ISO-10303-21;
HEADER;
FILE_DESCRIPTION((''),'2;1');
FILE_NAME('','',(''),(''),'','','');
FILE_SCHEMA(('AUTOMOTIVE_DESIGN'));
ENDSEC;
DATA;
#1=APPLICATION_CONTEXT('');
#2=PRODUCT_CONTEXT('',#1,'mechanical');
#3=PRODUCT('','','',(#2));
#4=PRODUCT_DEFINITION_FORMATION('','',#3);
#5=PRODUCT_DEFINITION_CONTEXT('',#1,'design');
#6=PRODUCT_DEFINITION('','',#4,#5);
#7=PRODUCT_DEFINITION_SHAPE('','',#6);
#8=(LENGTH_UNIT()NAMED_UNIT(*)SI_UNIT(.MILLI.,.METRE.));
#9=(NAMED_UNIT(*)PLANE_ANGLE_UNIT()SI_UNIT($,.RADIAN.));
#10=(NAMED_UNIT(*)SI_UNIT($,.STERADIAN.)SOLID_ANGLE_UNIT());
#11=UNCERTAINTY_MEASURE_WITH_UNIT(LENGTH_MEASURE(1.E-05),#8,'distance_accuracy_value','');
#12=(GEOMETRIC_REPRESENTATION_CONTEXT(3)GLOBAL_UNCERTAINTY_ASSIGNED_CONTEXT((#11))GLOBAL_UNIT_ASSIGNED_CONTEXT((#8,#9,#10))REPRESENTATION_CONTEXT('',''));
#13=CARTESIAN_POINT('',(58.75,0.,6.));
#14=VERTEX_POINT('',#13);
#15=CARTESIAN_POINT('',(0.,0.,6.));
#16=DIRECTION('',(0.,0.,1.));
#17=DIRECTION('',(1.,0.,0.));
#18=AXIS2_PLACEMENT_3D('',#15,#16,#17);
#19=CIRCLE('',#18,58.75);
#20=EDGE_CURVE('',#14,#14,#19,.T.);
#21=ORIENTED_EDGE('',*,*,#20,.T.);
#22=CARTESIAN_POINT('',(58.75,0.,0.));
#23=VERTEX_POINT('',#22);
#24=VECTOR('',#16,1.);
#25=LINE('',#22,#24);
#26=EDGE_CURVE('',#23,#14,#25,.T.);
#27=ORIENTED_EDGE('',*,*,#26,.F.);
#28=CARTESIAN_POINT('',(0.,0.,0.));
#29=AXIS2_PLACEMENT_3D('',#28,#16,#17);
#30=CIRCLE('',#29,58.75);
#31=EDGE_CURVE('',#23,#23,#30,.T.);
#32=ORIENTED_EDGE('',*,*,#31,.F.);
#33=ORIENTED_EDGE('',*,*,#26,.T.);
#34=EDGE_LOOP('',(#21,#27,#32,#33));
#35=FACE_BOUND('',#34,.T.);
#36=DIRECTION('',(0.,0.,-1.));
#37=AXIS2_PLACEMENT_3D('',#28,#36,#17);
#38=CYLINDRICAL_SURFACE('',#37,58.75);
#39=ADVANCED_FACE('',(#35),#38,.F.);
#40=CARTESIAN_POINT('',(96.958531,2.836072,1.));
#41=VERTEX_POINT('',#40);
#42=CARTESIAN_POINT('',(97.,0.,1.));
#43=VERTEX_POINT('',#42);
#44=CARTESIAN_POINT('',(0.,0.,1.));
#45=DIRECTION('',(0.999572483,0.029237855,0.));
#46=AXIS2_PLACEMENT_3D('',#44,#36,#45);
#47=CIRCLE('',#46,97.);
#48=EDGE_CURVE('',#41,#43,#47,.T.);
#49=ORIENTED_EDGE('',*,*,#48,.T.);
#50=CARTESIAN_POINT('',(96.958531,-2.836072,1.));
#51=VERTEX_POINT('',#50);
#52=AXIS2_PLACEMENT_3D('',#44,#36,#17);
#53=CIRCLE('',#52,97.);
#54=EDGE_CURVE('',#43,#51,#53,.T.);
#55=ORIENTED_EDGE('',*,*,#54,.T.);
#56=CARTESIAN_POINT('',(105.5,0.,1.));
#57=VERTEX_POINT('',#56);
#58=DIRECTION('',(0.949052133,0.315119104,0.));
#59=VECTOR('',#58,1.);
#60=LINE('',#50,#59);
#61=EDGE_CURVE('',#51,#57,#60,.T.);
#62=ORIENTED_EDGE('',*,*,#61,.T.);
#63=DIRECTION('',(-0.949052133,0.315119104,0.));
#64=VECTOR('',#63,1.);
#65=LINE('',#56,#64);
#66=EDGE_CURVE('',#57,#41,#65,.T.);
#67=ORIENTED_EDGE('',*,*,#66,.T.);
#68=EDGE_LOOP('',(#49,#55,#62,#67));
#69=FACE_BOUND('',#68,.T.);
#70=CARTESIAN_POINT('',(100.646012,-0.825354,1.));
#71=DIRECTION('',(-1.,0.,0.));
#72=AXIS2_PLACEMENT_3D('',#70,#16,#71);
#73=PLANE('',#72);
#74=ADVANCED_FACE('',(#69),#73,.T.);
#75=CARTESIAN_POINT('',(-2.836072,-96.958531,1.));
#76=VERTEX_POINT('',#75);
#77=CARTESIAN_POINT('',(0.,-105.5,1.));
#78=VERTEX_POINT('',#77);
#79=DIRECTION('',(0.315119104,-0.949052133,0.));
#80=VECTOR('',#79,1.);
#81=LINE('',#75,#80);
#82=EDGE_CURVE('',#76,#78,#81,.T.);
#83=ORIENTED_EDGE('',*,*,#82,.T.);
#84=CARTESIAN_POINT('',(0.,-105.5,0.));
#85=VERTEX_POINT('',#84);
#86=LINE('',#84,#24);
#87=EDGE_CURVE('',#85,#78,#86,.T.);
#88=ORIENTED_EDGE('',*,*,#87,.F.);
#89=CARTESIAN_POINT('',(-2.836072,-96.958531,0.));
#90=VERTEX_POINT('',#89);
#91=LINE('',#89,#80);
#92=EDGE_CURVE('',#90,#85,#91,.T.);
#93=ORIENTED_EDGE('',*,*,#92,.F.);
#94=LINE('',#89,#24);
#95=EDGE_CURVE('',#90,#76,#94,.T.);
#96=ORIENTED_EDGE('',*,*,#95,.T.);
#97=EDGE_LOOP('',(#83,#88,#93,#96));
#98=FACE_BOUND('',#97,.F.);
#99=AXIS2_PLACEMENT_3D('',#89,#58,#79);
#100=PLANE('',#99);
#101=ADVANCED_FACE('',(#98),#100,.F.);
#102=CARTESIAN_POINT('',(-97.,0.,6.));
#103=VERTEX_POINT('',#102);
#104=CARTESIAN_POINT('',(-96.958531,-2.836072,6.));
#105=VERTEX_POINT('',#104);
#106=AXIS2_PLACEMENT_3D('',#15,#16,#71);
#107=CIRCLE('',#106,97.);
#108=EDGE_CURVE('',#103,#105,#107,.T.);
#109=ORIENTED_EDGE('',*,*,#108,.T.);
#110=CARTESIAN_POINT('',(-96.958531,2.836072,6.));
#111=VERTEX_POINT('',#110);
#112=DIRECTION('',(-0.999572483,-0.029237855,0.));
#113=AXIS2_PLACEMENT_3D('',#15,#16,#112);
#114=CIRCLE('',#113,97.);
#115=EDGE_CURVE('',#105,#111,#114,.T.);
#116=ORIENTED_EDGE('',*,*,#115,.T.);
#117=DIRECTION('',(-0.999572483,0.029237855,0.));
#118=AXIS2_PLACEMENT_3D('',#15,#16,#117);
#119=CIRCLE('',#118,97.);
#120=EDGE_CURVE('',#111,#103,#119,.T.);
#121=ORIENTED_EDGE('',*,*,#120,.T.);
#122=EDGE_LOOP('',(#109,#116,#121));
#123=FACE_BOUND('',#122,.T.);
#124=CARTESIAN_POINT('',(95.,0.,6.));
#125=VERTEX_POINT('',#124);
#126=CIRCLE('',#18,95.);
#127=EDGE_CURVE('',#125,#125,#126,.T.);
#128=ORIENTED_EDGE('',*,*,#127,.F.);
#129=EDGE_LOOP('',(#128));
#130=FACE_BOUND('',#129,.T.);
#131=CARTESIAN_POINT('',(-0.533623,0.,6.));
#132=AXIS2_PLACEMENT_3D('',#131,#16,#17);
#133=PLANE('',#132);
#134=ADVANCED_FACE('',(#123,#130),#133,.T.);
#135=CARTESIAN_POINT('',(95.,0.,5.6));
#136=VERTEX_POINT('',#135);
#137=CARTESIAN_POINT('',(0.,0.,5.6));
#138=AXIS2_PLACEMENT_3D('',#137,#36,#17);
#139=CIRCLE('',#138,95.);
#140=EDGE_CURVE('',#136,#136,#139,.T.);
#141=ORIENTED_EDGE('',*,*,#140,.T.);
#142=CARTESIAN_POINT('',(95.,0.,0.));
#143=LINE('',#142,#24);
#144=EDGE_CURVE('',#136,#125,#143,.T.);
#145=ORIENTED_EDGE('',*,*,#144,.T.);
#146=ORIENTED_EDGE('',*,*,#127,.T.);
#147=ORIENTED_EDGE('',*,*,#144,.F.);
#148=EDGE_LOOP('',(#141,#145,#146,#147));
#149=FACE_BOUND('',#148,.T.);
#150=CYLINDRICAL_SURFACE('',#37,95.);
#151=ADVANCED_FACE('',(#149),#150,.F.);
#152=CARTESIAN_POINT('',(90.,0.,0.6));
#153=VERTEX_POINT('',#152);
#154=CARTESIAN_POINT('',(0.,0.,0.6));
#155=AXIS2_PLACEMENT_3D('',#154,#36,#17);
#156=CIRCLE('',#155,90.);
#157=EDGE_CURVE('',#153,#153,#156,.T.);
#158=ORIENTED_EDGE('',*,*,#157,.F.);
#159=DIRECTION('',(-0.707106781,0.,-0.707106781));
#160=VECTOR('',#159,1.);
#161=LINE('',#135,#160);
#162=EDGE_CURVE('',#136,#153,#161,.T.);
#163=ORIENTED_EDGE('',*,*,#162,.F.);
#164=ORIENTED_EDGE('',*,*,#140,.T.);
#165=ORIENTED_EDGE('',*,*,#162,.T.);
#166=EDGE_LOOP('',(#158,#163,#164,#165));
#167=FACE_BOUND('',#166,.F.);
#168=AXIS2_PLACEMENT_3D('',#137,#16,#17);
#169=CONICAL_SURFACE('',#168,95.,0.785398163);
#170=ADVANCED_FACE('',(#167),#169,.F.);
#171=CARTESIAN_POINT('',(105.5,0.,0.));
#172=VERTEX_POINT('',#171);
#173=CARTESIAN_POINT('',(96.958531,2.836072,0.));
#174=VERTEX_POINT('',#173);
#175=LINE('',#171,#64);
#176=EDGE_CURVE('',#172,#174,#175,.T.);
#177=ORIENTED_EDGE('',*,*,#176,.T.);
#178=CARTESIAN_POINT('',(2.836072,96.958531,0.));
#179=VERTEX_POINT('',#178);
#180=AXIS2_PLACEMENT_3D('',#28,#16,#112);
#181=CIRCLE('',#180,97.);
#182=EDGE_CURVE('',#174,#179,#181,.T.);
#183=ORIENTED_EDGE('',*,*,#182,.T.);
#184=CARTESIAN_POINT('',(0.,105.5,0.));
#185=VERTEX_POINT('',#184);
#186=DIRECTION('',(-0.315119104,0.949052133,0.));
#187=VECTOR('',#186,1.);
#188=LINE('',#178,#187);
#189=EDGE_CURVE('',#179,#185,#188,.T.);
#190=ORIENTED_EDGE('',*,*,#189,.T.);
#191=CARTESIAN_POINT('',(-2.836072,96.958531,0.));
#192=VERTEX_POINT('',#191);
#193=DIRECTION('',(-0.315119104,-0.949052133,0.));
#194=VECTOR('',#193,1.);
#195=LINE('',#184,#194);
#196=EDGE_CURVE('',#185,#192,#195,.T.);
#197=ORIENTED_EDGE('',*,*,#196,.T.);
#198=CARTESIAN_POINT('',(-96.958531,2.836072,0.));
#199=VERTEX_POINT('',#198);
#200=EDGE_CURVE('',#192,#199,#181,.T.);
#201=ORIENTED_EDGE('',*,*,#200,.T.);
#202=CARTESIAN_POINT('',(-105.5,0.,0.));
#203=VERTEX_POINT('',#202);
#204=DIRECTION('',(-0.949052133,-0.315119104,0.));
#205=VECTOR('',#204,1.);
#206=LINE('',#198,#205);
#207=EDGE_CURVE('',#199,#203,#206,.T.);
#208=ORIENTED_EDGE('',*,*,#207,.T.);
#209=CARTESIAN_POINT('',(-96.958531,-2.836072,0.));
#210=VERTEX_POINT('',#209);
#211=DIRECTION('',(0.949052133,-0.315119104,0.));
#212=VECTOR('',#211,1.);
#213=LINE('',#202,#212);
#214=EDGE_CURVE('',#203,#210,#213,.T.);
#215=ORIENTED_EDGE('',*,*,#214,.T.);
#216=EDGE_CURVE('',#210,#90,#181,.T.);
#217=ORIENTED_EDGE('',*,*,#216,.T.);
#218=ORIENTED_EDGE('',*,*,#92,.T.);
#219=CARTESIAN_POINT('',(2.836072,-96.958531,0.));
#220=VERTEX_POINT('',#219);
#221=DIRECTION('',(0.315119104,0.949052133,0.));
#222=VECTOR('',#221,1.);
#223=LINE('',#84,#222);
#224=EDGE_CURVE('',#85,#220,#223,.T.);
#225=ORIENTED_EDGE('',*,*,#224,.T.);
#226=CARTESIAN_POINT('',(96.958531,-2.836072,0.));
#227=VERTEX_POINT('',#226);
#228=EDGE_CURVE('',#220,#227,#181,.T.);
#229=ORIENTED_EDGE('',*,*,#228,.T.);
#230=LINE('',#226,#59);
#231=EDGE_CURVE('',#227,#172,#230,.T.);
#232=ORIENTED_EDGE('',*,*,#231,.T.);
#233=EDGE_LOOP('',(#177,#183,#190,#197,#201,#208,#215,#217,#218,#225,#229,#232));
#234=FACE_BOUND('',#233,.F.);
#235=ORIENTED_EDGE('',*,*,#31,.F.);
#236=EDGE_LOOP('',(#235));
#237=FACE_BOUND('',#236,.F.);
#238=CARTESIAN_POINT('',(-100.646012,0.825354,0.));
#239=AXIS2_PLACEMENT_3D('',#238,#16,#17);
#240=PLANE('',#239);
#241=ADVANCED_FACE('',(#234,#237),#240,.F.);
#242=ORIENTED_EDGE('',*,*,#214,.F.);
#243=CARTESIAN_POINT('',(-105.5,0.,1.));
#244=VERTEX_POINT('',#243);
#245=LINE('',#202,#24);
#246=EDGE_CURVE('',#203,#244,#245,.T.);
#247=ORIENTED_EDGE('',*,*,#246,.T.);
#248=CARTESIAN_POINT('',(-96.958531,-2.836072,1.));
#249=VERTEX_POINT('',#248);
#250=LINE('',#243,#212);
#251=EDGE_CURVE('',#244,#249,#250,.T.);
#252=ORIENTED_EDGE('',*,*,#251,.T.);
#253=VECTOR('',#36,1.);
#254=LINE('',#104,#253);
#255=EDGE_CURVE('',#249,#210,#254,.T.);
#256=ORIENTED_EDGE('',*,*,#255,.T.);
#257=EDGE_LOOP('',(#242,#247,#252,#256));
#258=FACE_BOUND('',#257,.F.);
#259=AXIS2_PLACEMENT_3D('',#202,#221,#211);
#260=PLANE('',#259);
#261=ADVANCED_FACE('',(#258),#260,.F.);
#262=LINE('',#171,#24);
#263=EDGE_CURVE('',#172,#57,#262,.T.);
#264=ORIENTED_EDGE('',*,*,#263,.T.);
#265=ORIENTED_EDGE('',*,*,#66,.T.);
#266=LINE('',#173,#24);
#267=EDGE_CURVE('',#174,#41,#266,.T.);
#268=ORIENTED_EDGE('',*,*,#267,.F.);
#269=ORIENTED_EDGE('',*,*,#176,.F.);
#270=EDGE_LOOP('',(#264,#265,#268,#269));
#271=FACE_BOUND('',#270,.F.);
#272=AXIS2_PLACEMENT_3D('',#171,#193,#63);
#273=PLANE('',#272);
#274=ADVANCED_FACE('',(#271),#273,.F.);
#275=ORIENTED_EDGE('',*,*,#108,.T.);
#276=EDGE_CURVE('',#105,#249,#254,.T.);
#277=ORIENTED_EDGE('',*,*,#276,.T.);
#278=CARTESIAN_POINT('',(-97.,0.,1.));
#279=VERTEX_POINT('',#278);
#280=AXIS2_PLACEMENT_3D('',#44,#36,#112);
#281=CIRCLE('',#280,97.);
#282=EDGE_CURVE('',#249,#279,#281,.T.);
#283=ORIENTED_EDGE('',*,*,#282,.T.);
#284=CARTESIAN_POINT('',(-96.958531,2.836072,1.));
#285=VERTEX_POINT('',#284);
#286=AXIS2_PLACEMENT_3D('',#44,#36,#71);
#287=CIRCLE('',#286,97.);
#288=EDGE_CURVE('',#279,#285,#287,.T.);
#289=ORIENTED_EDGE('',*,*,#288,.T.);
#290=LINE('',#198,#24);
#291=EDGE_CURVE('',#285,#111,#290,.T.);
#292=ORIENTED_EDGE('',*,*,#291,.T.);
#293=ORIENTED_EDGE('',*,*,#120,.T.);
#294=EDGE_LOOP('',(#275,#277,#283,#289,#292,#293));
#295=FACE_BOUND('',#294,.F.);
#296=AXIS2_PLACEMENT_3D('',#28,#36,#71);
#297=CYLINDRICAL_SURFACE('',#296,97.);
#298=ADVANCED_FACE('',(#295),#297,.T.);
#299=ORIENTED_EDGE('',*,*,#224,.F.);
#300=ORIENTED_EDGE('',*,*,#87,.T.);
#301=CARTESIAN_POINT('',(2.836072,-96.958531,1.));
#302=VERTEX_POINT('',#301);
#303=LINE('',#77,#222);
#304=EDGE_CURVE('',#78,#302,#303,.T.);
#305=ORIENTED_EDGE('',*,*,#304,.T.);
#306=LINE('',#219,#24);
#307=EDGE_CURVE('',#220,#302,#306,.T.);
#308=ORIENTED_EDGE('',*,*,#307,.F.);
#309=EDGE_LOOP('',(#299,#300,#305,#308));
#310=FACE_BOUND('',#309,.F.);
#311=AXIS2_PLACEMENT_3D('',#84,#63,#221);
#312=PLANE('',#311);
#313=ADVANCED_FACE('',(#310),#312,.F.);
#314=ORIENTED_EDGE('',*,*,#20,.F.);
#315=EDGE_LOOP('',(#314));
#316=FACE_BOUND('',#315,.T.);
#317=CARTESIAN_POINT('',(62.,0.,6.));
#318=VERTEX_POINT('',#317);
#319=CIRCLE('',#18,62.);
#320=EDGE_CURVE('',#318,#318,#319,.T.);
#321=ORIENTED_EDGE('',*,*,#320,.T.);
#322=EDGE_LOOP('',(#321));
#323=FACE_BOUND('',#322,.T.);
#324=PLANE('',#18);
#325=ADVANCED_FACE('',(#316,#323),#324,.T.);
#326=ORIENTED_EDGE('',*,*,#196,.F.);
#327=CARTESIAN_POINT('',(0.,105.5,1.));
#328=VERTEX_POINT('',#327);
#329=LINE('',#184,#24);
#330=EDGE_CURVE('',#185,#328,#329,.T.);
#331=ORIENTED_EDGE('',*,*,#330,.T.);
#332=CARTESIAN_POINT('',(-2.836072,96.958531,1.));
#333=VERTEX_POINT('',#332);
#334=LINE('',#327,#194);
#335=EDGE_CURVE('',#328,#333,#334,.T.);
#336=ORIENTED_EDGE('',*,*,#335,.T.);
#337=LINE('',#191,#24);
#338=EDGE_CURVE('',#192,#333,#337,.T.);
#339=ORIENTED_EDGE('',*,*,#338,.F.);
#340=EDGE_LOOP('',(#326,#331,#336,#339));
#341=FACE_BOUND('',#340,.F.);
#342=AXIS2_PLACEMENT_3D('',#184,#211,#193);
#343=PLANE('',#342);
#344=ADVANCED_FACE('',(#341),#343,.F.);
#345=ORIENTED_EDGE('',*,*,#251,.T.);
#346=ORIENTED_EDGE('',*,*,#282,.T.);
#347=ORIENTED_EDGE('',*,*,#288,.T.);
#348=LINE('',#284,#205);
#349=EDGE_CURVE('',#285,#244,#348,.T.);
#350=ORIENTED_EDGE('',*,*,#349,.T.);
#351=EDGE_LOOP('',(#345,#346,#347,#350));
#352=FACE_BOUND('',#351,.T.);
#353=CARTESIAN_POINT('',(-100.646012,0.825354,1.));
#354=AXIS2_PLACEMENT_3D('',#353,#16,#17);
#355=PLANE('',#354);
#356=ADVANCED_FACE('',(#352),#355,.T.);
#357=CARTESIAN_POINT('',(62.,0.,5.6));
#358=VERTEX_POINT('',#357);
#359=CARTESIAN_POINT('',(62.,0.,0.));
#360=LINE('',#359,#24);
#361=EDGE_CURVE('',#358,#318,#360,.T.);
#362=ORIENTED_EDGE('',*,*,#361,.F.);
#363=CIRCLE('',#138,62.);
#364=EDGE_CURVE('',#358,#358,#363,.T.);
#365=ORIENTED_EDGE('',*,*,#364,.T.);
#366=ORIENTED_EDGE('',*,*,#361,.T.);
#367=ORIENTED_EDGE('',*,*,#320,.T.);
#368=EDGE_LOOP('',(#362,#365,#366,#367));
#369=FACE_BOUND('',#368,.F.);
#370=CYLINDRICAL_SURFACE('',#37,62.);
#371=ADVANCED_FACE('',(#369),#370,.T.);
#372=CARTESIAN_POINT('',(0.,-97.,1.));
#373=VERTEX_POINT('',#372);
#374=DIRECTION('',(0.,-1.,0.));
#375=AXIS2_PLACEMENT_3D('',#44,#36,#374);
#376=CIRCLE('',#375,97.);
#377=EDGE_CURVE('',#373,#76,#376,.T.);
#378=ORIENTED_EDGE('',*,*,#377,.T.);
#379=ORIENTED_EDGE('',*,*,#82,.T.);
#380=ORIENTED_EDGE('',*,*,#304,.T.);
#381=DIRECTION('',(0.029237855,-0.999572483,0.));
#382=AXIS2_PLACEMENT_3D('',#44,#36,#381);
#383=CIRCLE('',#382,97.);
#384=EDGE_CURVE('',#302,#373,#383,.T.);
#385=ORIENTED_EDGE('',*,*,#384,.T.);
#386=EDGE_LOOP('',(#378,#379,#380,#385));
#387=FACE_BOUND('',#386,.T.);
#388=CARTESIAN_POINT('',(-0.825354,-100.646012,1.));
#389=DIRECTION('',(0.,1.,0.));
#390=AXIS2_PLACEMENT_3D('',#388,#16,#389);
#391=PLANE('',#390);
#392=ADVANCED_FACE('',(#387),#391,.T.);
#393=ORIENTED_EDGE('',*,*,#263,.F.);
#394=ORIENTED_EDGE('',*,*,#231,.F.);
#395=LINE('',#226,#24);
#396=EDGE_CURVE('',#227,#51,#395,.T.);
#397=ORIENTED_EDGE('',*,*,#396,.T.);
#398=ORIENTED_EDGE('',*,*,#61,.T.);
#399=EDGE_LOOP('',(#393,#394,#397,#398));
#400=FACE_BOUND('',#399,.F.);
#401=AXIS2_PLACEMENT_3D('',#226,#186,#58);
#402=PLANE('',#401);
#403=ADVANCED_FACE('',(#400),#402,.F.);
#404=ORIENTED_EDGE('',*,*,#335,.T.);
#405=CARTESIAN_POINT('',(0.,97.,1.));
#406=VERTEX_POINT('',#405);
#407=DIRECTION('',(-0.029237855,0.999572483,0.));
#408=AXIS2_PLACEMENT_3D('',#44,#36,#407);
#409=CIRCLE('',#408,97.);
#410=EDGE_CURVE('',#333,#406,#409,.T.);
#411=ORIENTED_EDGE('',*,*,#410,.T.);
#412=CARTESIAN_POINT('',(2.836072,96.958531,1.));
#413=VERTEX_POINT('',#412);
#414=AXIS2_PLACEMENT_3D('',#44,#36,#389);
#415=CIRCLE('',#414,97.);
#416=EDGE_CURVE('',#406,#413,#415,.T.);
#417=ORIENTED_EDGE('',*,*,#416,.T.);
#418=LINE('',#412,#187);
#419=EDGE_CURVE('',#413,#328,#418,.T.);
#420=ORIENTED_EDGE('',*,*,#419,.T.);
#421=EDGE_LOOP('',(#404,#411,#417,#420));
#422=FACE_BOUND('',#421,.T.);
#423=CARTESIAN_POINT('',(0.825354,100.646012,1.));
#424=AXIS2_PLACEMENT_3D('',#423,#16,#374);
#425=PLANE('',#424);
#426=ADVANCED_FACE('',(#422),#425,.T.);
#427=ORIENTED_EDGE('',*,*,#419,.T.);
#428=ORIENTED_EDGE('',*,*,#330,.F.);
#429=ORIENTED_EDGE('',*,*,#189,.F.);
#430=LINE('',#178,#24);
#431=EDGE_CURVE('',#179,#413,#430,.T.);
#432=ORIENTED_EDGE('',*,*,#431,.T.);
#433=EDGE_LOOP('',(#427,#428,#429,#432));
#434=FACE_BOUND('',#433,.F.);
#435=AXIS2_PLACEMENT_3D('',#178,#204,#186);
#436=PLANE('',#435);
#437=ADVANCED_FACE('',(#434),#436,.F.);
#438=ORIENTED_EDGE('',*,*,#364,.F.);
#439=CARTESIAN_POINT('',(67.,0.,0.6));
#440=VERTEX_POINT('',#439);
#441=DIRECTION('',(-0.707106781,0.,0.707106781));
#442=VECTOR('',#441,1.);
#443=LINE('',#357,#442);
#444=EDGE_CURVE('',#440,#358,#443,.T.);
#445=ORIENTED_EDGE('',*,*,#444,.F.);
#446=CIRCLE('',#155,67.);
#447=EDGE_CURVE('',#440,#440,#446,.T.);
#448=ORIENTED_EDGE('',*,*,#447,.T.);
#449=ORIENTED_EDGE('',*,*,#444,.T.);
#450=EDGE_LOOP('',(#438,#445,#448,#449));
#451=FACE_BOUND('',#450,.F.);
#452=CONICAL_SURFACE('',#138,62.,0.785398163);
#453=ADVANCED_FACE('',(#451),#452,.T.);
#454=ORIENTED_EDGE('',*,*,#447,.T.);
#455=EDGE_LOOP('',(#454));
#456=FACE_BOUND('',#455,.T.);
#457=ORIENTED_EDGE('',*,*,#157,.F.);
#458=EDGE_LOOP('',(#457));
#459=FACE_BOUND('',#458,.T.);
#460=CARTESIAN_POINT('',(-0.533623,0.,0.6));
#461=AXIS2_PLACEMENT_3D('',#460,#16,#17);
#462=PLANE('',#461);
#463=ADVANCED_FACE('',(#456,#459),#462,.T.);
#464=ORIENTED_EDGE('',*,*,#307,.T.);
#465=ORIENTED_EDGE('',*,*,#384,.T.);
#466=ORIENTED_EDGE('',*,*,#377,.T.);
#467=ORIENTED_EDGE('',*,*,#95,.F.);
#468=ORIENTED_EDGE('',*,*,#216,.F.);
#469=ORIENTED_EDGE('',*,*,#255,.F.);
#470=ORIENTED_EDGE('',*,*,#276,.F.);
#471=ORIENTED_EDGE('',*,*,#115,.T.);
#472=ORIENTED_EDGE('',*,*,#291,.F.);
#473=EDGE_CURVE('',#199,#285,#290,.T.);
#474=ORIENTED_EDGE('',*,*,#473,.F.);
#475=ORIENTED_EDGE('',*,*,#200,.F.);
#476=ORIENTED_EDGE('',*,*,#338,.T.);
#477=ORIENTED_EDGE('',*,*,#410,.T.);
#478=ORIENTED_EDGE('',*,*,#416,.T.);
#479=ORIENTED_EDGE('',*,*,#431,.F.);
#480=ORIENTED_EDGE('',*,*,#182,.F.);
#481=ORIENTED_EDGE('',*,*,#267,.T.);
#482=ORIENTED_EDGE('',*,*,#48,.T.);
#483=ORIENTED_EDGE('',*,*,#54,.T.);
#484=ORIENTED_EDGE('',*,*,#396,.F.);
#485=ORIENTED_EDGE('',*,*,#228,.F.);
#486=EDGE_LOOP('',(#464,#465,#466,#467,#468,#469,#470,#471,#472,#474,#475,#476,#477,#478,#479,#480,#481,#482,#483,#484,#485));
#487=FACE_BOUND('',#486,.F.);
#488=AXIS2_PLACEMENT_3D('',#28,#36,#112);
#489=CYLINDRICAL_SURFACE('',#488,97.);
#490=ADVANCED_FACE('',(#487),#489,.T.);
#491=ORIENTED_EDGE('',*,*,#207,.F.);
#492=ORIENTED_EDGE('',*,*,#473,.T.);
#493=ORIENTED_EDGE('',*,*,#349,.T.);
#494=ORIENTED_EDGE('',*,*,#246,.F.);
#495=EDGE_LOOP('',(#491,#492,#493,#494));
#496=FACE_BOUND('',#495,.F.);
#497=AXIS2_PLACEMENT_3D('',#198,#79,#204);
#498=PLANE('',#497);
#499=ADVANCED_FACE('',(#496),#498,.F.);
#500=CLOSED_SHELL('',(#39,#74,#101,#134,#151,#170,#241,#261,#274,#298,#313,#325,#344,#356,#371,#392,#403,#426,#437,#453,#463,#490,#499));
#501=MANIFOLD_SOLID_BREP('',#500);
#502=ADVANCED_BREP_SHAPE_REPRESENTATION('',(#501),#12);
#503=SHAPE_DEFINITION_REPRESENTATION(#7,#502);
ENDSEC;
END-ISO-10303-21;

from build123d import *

# Parameters (mm, degrees)
F0_R            = 95
F0_R_2          = 62
F0_R_3          = 58.75
F1_DEPTH        = 0.6
F2_DEPTH        = 6
F3_DEPTH        = 1
F3_COPIES_COUNT = 4
F4_SIZE         = 5


# Not quite as in the source:
# - a pattern or mirror of a feature is missing from the dataset's text; its kind, count and spacing are read off the source's solid


with BuildPart() as f1:
    # F0 (on Top) → F1 (new body)
    with BuildSketch(Plane.XY):
        with BuildLine():
            ThreePointArc((-96.9585308057, -2.8360719318), (1.418187549, -96.9896321473), (97, 0))
            ThreePointArc((97, 0), (1.418187549, 96.9896321473), (-96.9585308057, 2.8360719318))
            ThreePointArc((-96.9585308057, 2.8360719318), (-96.9896321473, 1.418187549), (-97, 0))
            ThreePointArc((-97, 0), (-96.9896321473, -1.418187549), (-96.9585308057, -2.8360719318))
        make_face()
        Circle(F0_R, mode=Mode.SUBTRACT)
        Circle(F0_R)
        Circle(F0_R_2, mode=Mode.SUBTRACT)
        Circle(F0_R_2)
        Circle(F0_R_3, mode=Mode.SUBTRACT)
    extrude(amount=F1_DEPTH)

    # F0 (on Top) → F2 (join)
    with BuildSketch(Plane.XY):
        with BuildLine():
            ThreePointArc((-96.9585308057, -2.8360719318), (1.418187549, -96.9896321473), (97, 0))
            ThreePointArc((97, 0), (1.418187549, 96.9896321473), (-96.9585308057, 2.8360719318))
            ThreePointArc((-96.9585308057, 2.8360719318), (-96.9896321473, 1.418187549), (-97, 0))
            ThreePointArc((-97, 0), (-96.9896321473, -1.418187549), (-96.9585308057, -2.8360719318))
        make_face()
        Circle(F0_R, mode=Mode.SUBTRACT)
        Circle(F0_R_2)
        Circle(F0_R_3, mode=Mode.SUBTRACT)
    extrude(amount=F2_DEPTH)

    # F0 (on Top) → F3 (join)
    with BuildSketch(Plane.XY):
        with BuildLine():
            ThreePointArc((-97, 0), (-96.9896321473, 1.418187549), (-96.9585308057, 2.8360719318))
            Line((-96.9585308057, 2.8360719318), (-105.5, 0))
            Line((-105.5, 0), (-97, 0))
        make_face()
        with BuildLine():
            Line((-105.5, 0), (-96.9585308057, -2.8360719318))
            ThreePointArc((-96.9585308057, -2.8360719318), (-96.9896321473, -1.418187549), (-97, 0))
            Line((-97, 0), (-105.5, 0))
        make_face()
    f3 = extrude(amount=F3_DEPTH)

    # F3_copies: F3 ×4 about axis
    f3_copies_axis = Axis((0, 0, 0), (0, 0, 1))
    for i in range(1, F3_COPIES_COUNT):
        add(f3.rotate(f3_copies_axis, i * 360 / F3_COPIES_COUNT))

    # F4
    f4_edges = [f1.edges().sort_by_distance(p)[0] for p in [
        (-62, 0, 0.6),
        (-95, 0, 0.6),
    ]]
    chamfer(f4_edges, length=F4_SIZE)


solid = f1.part
